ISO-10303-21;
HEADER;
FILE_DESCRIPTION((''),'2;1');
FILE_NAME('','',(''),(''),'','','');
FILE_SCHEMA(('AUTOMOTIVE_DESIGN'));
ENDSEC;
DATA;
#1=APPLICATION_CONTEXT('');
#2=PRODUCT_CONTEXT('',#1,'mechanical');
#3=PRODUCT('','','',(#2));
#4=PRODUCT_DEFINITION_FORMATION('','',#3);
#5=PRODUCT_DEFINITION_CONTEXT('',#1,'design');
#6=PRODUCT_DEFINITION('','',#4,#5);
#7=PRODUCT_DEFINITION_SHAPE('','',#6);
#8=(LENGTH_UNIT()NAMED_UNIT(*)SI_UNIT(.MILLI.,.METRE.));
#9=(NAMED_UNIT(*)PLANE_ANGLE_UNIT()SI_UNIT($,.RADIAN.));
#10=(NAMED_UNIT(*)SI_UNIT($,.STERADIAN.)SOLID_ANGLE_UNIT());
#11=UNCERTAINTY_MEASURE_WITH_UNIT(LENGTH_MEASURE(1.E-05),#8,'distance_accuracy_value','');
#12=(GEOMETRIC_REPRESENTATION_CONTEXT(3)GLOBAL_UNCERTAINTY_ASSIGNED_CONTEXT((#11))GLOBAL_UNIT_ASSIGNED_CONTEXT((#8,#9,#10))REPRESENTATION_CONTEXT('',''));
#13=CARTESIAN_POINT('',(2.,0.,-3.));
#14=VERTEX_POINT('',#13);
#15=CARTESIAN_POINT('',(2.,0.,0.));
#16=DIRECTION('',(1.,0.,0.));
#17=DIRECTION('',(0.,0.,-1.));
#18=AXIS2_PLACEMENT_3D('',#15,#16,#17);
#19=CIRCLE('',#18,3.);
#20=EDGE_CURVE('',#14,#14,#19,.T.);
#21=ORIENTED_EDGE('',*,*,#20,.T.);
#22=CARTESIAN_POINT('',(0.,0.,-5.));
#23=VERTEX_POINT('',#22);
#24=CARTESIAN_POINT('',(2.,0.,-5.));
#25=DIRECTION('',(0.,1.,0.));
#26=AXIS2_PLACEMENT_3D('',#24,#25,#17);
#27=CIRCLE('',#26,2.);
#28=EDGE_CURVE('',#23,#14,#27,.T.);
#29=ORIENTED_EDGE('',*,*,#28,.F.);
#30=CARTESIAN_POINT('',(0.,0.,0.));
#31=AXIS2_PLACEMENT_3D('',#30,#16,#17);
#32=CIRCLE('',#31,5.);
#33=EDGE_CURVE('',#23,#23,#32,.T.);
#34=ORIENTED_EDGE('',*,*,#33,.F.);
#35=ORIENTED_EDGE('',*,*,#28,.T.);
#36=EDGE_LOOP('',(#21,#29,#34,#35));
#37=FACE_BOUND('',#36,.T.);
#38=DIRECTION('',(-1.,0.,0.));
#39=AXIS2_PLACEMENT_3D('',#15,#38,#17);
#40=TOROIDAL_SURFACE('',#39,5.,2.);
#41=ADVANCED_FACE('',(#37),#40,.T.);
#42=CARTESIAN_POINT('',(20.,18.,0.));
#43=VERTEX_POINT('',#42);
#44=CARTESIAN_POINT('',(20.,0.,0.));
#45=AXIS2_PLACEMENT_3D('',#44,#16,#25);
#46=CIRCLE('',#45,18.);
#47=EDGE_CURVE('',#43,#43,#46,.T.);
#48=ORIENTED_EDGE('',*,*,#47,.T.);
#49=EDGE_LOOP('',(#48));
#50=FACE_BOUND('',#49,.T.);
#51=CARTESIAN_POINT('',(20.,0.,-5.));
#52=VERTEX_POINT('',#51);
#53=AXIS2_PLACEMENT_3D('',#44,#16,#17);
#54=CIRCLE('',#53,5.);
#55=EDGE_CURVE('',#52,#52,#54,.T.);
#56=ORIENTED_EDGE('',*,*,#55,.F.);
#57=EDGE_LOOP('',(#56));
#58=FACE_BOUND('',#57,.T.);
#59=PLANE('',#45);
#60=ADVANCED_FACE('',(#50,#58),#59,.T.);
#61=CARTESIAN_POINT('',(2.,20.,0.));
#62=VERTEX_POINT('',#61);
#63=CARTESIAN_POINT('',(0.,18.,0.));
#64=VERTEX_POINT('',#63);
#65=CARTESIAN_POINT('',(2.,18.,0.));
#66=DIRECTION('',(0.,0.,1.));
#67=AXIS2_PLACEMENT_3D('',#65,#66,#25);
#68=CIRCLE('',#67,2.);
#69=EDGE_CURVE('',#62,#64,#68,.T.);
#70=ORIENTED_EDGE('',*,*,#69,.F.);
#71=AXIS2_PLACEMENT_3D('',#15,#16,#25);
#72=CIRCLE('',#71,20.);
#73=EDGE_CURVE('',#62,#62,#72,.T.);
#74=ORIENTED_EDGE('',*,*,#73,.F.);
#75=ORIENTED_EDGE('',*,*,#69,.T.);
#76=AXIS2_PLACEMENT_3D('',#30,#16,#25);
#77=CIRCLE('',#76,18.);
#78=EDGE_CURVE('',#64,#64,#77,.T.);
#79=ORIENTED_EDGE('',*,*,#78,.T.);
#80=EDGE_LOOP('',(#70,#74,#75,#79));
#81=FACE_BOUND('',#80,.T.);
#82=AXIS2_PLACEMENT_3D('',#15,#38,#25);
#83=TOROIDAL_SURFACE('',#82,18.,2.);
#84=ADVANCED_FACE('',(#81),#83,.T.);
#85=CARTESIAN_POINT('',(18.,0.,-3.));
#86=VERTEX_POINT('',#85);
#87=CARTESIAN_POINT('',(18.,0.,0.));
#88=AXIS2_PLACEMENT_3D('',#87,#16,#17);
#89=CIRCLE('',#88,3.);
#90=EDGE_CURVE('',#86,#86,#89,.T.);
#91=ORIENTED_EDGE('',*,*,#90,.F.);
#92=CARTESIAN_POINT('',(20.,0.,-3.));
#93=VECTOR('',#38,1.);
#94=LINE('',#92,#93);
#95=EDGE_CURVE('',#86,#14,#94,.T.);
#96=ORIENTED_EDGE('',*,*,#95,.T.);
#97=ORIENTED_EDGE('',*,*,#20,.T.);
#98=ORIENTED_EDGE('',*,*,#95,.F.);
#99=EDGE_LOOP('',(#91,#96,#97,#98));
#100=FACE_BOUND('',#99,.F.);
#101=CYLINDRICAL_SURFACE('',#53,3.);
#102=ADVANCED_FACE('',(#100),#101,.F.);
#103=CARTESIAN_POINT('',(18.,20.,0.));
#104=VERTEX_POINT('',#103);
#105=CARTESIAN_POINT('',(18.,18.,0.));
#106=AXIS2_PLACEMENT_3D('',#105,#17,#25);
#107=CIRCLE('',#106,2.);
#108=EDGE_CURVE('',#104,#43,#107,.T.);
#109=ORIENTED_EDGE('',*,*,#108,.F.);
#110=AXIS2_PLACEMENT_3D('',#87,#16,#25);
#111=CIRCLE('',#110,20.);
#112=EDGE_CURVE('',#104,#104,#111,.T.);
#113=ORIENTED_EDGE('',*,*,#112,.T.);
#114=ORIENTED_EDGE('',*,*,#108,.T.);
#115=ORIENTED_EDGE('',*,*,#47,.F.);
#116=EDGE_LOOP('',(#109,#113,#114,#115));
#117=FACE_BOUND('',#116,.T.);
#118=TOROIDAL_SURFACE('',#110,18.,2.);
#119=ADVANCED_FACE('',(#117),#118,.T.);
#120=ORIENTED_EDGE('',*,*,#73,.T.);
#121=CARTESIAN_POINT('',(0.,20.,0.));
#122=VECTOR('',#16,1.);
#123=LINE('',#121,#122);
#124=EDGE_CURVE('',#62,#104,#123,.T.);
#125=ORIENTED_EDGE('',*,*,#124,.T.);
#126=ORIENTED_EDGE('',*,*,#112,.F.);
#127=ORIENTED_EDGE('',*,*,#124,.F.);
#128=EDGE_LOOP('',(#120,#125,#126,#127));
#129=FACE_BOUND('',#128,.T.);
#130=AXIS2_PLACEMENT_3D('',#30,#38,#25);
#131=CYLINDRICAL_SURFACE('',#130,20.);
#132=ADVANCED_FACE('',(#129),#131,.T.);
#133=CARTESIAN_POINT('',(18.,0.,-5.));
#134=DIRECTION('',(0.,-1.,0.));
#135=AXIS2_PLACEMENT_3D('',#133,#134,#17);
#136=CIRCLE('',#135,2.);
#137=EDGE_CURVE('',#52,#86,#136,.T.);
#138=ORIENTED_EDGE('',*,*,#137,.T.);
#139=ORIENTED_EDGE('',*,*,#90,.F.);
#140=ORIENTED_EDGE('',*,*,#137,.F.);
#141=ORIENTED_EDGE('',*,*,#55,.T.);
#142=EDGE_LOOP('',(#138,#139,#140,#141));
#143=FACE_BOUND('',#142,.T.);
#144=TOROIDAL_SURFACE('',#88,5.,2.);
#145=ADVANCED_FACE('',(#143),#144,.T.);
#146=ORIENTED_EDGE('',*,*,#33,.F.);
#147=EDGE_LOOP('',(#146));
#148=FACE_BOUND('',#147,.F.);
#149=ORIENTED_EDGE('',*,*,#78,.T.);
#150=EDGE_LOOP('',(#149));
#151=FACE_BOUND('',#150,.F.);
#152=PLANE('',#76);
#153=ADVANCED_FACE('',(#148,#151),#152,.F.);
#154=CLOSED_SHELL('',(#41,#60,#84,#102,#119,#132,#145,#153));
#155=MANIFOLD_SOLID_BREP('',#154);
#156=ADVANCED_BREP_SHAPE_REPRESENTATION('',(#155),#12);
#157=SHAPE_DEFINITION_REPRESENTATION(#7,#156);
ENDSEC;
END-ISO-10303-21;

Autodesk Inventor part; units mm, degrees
ref_plane "YZ Plane" through (0, 0, 0) normal (1, 0, 0) x (0, 1, 0)
ref_plane "XZ Plane" through (0, 0, 0) normal (0, 1, 0) x (-1, 0, 0)
ref_plane "XY Plane" through (0, 0, 0) normal (0, 0, 1) x (1, 0, 0)
sketch "草图1" plane through (0, 0, 0) normal (1, 0, 0) x (0, 1, 0)
  circle A0 centre (0, 0) radius 20
  dimension "d0" = 40
extrude "拉伸1" add sketch "草图1" along normal blind 20
sketch "草图2" plane through (20, 0, 0) normal (1, 0, 0) x (0, 0, -1)
  circle A0 centre (0, 0) radius 3
  dimension "d3" = 6
extrude "拉伸2" cut sketch "草图2" against normal through all
fillet "圆角1" radius 2 4 edges at (0, -20, 0) (20, -20, 0) (0, 0, 3) (20, 0, 3)
properties part number "皮带轮"
